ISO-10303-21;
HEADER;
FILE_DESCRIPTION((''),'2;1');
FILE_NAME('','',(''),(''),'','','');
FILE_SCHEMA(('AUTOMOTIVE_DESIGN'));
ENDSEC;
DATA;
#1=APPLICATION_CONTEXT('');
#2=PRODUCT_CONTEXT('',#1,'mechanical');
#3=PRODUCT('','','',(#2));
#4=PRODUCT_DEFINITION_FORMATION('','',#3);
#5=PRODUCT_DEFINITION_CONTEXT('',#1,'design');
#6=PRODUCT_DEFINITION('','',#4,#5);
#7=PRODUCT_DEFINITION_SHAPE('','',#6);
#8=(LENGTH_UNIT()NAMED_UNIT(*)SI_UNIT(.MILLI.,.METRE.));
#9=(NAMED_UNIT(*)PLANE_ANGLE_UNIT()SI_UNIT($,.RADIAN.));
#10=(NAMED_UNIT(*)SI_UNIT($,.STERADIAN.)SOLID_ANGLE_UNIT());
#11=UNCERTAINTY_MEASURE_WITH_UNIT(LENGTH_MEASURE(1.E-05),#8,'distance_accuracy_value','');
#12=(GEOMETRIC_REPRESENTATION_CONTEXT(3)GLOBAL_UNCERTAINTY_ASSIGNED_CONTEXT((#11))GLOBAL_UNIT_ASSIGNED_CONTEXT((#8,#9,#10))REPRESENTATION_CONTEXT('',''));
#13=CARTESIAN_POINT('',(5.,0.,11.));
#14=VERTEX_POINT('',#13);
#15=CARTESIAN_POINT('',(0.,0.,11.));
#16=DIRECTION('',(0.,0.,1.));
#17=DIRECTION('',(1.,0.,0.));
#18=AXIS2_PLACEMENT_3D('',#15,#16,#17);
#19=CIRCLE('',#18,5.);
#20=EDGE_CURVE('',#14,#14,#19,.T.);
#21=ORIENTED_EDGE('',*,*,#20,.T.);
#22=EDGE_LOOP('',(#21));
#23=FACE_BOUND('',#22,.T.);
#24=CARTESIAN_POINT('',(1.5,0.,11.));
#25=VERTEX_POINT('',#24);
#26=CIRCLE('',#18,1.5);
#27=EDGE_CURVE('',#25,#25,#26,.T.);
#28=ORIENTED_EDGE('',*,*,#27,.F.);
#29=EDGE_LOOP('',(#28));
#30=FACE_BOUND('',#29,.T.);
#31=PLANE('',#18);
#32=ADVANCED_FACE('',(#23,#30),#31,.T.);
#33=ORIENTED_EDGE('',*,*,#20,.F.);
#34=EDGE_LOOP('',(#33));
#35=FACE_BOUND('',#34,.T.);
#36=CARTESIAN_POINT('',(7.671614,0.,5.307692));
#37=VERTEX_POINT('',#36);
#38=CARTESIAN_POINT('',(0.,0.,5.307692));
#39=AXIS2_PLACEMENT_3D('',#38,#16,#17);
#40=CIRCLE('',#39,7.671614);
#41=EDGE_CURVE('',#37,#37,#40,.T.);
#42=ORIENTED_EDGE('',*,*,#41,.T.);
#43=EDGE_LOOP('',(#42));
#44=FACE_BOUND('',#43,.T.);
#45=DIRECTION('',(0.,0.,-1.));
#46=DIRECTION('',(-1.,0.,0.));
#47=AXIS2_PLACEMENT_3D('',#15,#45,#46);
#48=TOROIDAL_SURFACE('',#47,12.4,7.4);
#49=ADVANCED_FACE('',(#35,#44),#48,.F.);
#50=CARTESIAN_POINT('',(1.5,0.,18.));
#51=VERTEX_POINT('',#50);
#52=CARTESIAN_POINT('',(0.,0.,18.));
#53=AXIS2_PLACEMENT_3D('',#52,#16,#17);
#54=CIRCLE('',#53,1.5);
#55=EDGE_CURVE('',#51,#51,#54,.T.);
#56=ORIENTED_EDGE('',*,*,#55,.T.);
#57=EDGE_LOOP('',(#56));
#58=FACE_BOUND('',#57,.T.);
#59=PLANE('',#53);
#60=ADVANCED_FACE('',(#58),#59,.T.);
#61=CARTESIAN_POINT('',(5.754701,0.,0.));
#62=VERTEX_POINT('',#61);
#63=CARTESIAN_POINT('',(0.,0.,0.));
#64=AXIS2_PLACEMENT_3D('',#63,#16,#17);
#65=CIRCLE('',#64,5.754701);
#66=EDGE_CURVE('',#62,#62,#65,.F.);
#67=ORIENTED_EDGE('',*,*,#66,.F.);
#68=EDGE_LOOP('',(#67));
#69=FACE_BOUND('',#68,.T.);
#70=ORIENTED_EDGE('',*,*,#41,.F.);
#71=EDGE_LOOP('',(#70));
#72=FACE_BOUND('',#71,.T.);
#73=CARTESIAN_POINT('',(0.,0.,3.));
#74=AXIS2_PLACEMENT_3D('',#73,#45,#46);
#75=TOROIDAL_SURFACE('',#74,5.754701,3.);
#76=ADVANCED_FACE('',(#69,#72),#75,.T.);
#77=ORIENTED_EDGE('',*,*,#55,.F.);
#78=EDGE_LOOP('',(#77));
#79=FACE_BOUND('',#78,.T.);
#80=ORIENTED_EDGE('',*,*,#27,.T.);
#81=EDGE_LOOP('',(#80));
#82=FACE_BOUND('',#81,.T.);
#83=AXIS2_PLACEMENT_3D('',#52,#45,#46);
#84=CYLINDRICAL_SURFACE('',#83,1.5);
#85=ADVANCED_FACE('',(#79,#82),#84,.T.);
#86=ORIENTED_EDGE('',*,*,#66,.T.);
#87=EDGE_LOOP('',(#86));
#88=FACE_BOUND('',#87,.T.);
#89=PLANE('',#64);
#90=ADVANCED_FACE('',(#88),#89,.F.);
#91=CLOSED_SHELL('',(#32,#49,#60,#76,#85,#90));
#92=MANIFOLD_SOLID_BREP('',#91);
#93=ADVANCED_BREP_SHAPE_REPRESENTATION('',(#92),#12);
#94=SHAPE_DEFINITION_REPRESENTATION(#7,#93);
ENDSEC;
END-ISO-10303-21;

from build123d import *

# Parameters (mm, degrees)
SKETCH1_R           = 10
BOSS_EXTRUDE1_DEPTH = 4
SKETCH2_R           = 5
BOSS_EXTRUDE2_DEPTH = 7
SKETCH3_R           = 1.5
BOSS_EXTRUDE3_DEPTH = 7
FILLET4_R           = 7.4
FILLET15_R          = 4.2
FILLET16_R          = 3


with BuildPart() as part:
    # Sketch1 → Boss-Extrude1 (new body)
    with BuildSketch(Plane.XY):
        Circle(SKETCH1_R)
    extrude(amount=BOSS_EXTRUDE1_DEPTH)

    # Sketch2 → Boss-Extrude2 (add)
    with BuildSketch(Plane.XY.offset(4)):
        Circle(SKETCH2_R)
    extrude(amount=BOSS_EXTRUDE2_DEPTH)

    # Sketch3 → Boss-Extrude3 (add)
    with BuildSketch(Plane.XY.offset(11)):
        Circle(SKETCH3_R)
    extrude(amount=BOSS_EXTRUDE3_DEPTH)

    # Fillet4
    # the kernel refuses this fillet: 7.4 mm, written as the material it adds along each edge
    with BuildSketch(Plane(origin=(0, 0, 4), x_dir=(1, 0, 0), z_dir=(0, -1, 0))) as fillet4_piece_1:
        with BuildLine():
            CenterArc((12.4, 7), FILLET4_R, 180, 71.075355584)
            Line((5, 7), (4.852, 7))
            Line((4.852, 7), (4.852, 0))
            Line((4.852, 0), (5, -0.148))
            ThreePointArc((5, -0.148), (7.5, -0.148), (9.952, -0.14))
            Line((9.952, -0.14), (10, 0))
        make_face()
    revolve(axis=Axis((0, 0, 4), (0, 0, 1)))

    # Fillet15
    # the kernel refuses this fillet: 4.2 mm, written as the material it takes off along each edge
    with BuildSketch(Plane(origin=(0, 0, 0), x_dir=(1, 0, 0), z_dir=(0, -1, 0))) as fillet15_piece_1:
        with BuildLine():
            CenterArc((5.804764607, 4.2), FILLET15_R, 270, 87.270597363)
            Line((5.804764607, 0), (5.804764607, -0.084))
            Line((5.804764607, -0.084), (10, -0.084))
            Line((10, -0.084), (10.084, 0))
            ThreePointArc((10.084, 0), (10.084, 2), (10.083904708, 3.996))
            Line((10.083904708, 3.996), (10, 4))
        make_face()
    revolve(axis=Axis((0, 0, 0), (0, 0, 1)), mode=Mode.SUBTRACT)

    # Fillet16
    fillet16_edges = [part.edges().sort_by_distance(p)[0] for p in [
        (-10, 0, 4),
    ]]
    fillet(fillet16_edges, radius=FILLET16_R)


solid = part.part
